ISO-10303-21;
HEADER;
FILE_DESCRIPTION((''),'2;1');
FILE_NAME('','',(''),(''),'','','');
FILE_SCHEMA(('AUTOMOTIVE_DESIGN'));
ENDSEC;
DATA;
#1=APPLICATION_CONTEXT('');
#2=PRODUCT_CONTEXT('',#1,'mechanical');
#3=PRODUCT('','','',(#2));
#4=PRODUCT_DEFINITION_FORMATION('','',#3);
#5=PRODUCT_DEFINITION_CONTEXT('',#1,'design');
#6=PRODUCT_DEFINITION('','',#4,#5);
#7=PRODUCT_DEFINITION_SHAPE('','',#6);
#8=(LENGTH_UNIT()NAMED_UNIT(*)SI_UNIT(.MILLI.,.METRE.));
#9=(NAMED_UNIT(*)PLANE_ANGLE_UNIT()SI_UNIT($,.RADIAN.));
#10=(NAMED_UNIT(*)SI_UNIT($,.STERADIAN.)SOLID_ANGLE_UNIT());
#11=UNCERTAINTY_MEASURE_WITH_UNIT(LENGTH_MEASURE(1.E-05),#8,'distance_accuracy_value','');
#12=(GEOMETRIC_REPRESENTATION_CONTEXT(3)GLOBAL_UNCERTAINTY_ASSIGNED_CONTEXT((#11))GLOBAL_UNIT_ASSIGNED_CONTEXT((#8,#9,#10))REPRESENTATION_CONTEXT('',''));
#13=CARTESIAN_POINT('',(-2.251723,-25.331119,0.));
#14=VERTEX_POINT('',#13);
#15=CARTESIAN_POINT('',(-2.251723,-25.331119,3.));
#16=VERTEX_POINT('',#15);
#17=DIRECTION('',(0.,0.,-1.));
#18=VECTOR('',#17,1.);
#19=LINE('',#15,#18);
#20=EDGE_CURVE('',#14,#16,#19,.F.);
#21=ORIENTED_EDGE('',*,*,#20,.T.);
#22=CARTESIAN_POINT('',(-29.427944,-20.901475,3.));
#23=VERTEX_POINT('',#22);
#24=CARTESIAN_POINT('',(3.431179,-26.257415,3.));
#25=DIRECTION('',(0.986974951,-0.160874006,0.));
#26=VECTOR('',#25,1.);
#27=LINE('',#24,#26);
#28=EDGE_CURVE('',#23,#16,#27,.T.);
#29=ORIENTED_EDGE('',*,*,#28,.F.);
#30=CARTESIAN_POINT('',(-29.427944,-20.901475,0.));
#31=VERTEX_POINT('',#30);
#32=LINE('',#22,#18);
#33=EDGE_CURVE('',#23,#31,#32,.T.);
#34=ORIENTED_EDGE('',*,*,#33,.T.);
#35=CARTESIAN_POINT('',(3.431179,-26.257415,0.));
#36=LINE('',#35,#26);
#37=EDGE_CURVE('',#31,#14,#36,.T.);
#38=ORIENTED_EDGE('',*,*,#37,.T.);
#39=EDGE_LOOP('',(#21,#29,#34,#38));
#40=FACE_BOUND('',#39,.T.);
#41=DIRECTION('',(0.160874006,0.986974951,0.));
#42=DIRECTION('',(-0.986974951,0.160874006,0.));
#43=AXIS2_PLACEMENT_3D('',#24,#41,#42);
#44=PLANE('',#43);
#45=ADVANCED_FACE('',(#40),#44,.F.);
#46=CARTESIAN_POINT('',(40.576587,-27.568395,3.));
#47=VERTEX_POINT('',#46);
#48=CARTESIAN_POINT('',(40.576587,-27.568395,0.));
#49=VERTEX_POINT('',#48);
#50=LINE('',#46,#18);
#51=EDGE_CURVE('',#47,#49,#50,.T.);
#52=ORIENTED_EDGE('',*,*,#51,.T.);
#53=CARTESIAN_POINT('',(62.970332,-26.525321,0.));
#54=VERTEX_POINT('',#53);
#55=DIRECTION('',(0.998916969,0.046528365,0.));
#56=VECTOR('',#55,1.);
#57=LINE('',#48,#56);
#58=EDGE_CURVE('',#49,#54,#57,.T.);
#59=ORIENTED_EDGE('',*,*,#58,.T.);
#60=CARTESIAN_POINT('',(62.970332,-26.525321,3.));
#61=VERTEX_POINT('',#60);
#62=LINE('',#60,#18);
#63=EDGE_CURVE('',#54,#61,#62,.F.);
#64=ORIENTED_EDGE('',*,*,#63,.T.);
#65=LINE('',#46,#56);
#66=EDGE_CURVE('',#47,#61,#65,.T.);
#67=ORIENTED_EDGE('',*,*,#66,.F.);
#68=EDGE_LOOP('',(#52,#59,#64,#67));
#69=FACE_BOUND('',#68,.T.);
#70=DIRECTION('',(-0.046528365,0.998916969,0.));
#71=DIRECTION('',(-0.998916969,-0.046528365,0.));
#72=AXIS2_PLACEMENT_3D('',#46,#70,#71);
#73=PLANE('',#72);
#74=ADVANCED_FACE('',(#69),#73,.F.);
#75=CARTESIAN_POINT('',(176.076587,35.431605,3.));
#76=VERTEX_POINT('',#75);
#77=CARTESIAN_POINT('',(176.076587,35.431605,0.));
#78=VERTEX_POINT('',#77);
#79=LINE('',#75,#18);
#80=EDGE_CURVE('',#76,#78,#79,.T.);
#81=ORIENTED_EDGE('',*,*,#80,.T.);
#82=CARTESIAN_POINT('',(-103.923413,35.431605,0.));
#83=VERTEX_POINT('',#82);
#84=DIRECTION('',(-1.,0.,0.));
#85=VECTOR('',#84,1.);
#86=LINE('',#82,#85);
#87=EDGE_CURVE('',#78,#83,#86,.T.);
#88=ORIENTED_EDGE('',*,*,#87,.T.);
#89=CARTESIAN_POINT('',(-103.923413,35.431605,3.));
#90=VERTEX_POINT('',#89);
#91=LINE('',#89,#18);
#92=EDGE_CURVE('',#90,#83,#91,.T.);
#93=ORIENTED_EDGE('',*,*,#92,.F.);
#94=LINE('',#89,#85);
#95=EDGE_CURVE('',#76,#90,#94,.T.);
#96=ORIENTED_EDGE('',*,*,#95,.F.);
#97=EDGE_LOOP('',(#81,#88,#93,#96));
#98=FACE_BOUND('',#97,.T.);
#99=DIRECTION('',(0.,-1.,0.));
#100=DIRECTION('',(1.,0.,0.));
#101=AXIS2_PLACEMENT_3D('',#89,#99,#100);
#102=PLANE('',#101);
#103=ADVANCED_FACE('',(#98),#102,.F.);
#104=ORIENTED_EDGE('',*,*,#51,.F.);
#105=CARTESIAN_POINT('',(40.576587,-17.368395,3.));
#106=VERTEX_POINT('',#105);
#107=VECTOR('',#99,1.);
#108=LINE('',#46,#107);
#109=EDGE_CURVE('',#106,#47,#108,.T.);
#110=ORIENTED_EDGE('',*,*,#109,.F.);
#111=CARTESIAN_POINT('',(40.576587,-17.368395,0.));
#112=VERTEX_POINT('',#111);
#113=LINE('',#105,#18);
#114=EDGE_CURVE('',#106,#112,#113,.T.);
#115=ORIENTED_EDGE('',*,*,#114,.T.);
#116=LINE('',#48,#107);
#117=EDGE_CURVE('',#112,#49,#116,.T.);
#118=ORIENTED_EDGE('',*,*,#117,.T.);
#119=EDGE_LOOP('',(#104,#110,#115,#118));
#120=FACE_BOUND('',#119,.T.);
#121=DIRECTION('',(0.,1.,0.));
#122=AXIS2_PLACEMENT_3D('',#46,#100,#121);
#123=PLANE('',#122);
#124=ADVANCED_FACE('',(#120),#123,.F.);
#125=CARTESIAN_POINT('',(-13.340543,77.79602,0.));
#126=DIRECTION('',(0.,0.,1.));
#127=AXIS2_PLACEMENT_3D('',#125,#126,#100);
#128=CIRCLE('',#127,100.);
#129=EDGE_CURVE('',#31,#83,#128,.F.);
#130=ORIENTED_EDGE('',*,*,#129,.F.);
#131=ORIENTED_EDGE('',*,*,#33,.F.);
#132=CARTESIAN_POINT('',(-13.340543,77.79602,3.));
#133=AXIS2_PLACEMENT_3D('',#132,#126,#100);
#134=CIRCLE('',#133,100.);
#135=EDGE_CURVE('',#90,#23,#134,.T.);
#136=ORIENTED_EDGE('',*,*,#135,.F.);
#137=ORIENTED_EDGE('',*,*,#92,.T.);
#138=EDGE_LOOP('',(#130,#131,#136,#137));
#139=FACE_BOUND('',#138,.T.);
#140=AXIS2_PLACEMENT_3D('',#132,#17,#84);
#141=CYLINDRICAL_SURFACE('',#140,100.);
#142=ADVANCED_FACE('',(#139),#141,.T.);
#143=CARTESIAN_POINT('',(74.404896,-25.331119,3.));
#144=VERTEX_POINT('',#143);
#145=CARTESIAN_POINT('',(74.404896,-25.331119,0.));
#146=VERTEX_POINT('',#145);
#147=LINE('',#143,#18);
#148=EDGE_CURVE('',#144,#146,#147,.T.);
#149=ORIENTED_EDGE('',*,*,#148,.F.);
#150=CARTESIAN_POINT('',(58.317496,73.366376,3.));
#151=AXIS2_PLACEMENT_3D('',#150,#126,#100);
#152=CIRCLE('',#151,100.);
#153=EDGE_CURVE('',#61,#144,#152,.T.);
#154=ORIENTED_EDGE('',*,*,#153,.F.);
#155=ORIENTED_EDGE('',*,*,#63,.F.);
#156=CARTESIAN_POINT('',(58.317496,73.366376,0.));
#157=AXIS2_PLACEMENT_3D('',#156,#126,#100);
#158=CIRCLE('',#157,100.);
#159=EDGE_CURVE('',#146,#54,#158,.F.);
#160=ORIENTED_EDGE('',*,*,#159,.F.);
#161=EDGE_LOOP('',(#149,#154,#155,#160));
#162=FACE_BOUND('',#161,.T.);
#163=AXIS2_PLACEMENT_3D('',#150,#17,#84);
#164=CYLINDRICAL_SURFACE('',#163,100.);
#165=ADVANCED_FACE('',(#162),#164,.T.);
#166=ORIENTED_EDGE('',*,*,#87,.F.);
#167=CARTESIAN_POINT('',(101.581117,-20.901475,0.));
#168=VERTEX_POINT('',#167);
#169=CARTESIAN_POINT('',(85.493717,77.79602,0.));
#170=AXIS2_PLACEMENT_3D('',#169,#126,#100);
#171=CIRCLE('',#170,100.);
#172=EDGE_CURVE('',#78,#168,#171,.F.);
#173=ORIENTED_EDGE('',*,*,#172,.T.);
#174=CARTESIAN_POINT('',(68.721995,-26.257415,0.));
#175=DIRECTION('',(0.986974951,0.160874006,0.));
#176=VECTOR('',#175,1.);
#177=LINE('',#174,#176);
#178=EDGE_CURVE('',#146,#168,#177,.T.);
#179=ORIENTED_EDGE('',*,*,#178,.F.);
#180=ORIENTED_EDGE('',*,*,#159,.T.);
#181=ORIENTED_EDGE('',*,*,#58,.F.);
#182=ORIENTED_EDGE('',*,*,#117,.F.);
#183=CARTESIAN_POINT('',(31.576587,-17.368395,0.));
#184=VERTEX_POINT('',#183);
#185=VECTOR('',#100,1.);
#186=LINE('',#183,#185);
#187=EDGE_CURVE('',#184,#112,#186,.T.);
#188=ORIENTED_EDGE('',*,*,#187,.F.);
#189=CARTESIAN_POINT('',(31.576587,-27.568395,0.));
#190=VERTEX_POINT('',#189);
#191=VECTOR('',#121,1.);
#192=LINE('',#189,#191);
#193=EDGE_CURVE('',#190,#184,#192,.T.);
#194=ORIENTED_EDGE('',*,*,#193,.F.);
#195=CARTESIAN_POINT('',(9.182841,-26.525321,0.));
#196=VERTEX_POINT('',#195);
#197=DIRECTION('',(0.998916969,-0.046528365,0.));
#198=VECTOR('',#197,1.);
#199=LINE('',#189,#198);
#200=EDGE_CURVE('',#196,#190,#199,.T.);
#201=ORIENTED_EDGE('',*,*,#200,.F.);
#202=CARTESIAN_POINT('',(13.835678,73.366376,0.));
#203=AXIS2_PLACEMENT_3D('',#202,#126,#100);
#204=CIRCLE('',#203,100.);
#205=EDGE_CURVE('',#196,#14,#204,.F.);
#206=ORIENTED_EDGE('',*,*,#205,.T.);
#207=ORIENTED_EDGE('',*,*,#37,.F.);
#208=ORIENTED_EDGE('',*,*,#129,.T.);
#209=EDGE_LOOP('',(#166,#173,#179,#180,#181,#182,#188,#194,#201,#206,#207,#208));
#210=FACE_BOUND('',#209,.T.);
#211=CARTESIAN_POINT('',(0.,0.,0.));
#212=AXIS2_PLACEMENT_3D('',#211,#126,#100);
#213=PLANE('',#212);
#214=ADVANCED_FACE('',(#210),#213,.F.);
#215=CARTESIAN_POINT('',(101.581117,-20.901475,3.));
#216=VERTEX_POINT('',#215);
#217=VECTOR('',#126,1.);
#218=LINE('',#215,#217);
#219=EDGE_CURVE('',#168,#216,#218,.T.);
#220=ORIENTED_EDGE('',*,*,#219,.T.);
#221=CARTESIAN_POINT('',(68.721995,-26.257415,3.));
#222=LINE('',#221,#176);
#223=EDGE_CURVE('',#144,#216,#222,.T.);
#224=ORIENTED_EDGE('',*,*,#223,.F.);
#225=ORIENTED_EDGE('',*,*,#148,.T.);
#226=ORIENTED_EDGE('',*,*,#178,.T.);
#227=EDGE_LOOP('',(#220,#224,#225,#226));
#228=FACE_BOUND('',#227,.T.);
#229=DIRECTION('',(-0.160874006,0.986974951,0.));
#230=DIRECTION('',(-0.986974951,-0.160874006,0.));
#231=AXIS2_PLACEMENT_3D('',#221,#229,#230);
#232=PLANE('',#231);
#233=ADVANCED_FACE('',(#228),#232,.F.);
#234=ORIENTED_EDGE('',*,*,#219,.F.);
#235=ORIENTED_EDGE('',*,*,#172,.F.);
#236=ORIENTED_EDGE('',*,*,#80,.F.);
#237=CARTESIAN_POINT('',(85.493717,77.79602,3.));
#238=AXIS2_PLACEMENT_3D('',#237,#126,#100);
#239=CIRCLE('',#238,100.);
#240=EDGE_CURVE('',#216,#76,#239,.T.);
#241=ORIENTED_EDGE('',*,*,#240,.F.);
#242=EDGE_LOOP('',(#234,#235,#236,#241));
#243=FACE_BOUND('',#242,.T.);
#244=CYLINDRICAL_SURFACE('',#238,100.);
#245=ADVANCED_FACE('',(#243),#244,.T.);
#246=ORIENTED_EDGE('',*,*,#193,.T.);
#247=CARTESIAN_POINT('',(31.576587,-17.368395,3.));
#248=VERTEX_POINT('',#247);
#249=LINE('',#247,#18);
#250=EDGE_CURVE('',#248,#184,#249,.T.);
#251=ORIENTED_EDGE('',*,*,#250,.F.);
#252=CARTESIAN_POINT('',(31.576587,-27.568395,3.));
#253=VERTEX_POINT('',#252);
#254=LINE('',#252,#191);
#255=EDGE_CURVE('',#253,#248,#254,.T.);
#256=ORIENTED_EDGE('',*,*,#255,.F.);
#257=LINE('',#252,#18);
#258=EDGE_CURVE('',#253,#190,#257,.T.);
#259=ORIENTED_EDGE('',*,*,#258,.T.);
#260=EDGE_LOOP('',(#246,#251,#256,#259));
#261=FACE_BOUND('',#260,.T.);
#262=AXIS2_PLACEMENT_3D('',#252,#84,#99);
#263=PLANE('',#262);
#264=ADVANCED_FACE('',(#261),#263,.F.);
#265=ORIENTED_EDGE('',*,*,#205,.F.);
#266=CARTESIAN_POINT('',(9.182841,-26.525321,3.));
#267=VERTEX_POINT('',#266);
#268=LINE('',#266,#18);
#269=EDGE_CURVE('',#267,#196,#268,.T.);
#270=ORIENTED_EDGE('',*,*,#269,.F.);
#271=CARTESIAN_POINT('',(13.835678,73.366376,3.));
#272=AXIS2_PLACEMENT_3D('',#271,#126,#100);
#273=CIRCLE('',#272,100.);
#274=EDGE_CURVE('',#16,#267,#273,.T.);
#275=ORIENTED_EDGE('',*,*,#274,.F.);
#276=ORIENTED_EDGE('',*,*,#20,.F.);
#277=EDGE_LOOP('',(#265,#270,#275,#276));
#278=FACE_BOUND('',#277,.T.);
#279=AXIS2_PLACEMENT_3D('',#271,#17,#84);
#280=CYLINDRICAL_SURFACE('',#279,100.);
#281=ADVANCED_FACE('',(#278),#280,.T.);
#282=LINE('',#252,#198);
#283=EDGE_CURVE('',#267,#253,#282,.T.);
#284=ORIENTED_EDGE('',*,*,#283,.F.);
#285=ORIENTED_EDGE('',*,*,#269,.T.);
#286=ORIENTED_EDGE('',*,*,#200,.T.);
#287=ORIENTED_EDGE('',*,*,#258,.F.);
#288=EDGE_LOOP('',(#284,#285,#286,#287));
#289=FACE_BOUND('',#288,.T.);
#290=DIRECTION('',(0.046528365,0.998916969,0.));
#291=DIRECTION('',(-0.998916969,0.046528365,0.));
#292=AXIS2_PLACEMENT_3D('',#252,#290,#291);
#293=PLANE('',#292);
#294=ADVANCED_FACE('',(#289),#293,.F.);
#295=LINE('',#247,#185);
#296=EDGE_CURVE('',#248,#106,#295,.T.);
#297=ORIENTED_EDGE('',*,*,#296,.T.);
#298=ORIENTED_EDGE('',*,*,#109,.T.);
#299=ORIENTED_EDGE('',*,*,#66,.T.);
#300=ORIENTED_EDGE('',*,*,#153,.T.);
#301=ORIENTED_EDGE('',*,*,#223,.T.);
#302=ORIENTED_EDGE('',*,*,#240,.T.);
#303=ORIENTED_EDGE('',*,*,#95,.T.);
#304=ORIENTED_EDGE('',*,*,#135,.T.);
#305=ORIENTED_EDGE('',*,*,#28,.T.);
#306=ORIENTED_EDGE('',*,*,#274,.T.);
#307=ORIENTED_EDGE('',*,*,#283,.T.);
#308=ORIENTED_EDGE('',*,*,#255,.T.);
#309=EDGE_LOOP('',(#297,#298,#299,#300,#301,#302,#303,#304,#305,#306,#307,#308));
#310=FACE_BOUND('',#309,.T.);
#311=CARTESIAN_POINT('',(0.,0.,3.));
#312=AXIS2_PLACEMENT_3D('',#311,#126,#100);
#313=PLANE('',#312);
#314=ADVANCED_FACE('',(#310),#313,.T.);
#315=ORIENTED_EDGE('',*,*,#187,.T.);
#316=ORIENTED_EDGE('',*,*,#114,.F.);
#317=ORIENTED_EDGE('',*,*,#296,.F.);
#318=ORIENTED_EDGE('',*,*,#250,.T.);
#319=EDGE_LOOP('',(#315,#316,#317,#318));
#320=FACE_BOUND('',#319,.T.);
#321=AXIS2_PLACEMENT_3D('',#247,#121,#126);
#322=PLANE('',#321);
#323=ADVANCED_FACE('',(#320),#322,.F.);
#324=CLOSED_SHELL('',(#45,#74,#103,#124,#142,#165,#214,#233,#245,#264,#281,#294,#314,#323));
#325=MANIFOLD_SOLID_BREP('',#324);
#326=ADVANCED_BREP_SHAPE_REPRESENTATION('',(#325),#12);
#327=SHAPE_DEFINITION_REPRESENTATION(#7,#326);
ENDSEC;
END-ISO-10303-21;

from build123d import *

# Parameters (mm, degrees)
BOSS_EXTRU_1_DEPTH = 3
CONG_1_R           = 100


with BuildPart() as part:
    # Esquisse1 → Boss.-Extru.1 (new body)
    with BuildSketch(Plane.XY):
        Polygon((-103.923413348, 35.431604979), (176.076586652, 35.431604979), (166.152848879, -10.376473534), (68.721994761, -26.257415358), (40.576586652, -27.568395021), (40.576586652, -17.368395021), (31.576586652, -17.368395021), (31.576586652, -27.568395021), (3.431178543, -26.257415358), (-93.999675575, -10.376473534), align=None)
    extrude(amount=BOSS_EXTRU_1_DEPTH)

    # Congé1
    # the kernel refuses this fillet: 100 mm, written as the material it takes off along each edge
    with BuildSketch(Plane(origin=(166.152848879, -10.376473534, -163.559702543), x_dir=(0.21172591921769693, 0.9773290823112863, 0), z_dir=(0, 0, 1))) as cong_1_piece_1:
        with BuildLine():
            CenterArc((69.095913034, 97.498917991), CONG_1_R, 201.481144987, 55.677497197)
            Line((-23.957899624, 60.879415675), (-25.818975877, 60.147025629))
            Line((-25.818975877, 60.147025629), (-1.861076253, -0.732390046))
            Line((-1.861076253, -0.732390046), (0, -2))
            ThreePointArc((0, -2), (23.435339919, -2), (46.426175173, -1.94997836))
            Line((46.426175173, -1.94997836), (46.870679837, 0))
        make_face()
    extrude(amount=330.119405086, mode=Mode.SUBTRACT)
    with BuildSketch(Plane(origin=(68.721994761, -26.257415358, -14.394746153), x_dir=(0.9869749511957248, 0.16087400570694135, 0), z_dir=(0, 0, 1)), Plane(origin=(3.431178543, -26.257415358, -14.394746153), x_dir=(0.9989169691295284, -0.04652836538152723, 0), z_dir=(0, 0, 1))) as cong_1_piece_2:
        with BuildLine():
            CenterArc((CONG_1_R * 0.057578984614, CONG_1_R), CONG_1_R, 263.409211525, 6.590788475)
            Line((-CONG_1_R * 0.0571984584269, CONG_1_R * 0.00660876862688), (-CONG_1_R * 0.0594940072877, -CONG_1_R * 0.0132590560006))
            Line((-CONG_1_R * 0.0594940072877, -CONG_1_R * 0.0132590560006), (-CONG_1_R * 0.00115157969228, -CONG_1_R * 0.02))
            Line((-CONG_1_R * 0.00115157969228, -CONG_1_R * 0.02), (CONG_1_R * 0.057578984614, -CONG_1_R * 0.02))
            Line((CONG_1_R * 0.057578984614, -CONG_1_R * 0.02), (CONG_1_R * 0.057578984614, 0))
        make_face()
    extrude(amount=31.789492307, mode=Mode.SUBTRACT)
    with BuildSketch(Plane(origin=(-93.999675575, -10.376473534, -163.559702543), x_dir=(0.9869749511957245, -0.1608740057069428, 0), z_dir=(0, 0, 1))) as cong_1_piece_3:
        with BuildLine():
            CenterArc((65.423881017, 100), CONG_1_R, 214.322502803, 55.677497197)
            Line((-17.163809688, 43.614954607), (-18.815563502, 42.487253699))
            ThreePointArc((-18.815563502, 42.487253699), (-10.442981097, 21.075087257), (-1.861076253, -0.732390046))
            Line((-1.861076253, -0.732390046), (0, -2))
            Line((0, -2), (65.423881017, -2))
            Line((65.423881017, -2), (65.423881017, 0))
        make_face()
    extrude(amount=330.119405086, mode=Mode.SUBTRACT)


solid = part.part
